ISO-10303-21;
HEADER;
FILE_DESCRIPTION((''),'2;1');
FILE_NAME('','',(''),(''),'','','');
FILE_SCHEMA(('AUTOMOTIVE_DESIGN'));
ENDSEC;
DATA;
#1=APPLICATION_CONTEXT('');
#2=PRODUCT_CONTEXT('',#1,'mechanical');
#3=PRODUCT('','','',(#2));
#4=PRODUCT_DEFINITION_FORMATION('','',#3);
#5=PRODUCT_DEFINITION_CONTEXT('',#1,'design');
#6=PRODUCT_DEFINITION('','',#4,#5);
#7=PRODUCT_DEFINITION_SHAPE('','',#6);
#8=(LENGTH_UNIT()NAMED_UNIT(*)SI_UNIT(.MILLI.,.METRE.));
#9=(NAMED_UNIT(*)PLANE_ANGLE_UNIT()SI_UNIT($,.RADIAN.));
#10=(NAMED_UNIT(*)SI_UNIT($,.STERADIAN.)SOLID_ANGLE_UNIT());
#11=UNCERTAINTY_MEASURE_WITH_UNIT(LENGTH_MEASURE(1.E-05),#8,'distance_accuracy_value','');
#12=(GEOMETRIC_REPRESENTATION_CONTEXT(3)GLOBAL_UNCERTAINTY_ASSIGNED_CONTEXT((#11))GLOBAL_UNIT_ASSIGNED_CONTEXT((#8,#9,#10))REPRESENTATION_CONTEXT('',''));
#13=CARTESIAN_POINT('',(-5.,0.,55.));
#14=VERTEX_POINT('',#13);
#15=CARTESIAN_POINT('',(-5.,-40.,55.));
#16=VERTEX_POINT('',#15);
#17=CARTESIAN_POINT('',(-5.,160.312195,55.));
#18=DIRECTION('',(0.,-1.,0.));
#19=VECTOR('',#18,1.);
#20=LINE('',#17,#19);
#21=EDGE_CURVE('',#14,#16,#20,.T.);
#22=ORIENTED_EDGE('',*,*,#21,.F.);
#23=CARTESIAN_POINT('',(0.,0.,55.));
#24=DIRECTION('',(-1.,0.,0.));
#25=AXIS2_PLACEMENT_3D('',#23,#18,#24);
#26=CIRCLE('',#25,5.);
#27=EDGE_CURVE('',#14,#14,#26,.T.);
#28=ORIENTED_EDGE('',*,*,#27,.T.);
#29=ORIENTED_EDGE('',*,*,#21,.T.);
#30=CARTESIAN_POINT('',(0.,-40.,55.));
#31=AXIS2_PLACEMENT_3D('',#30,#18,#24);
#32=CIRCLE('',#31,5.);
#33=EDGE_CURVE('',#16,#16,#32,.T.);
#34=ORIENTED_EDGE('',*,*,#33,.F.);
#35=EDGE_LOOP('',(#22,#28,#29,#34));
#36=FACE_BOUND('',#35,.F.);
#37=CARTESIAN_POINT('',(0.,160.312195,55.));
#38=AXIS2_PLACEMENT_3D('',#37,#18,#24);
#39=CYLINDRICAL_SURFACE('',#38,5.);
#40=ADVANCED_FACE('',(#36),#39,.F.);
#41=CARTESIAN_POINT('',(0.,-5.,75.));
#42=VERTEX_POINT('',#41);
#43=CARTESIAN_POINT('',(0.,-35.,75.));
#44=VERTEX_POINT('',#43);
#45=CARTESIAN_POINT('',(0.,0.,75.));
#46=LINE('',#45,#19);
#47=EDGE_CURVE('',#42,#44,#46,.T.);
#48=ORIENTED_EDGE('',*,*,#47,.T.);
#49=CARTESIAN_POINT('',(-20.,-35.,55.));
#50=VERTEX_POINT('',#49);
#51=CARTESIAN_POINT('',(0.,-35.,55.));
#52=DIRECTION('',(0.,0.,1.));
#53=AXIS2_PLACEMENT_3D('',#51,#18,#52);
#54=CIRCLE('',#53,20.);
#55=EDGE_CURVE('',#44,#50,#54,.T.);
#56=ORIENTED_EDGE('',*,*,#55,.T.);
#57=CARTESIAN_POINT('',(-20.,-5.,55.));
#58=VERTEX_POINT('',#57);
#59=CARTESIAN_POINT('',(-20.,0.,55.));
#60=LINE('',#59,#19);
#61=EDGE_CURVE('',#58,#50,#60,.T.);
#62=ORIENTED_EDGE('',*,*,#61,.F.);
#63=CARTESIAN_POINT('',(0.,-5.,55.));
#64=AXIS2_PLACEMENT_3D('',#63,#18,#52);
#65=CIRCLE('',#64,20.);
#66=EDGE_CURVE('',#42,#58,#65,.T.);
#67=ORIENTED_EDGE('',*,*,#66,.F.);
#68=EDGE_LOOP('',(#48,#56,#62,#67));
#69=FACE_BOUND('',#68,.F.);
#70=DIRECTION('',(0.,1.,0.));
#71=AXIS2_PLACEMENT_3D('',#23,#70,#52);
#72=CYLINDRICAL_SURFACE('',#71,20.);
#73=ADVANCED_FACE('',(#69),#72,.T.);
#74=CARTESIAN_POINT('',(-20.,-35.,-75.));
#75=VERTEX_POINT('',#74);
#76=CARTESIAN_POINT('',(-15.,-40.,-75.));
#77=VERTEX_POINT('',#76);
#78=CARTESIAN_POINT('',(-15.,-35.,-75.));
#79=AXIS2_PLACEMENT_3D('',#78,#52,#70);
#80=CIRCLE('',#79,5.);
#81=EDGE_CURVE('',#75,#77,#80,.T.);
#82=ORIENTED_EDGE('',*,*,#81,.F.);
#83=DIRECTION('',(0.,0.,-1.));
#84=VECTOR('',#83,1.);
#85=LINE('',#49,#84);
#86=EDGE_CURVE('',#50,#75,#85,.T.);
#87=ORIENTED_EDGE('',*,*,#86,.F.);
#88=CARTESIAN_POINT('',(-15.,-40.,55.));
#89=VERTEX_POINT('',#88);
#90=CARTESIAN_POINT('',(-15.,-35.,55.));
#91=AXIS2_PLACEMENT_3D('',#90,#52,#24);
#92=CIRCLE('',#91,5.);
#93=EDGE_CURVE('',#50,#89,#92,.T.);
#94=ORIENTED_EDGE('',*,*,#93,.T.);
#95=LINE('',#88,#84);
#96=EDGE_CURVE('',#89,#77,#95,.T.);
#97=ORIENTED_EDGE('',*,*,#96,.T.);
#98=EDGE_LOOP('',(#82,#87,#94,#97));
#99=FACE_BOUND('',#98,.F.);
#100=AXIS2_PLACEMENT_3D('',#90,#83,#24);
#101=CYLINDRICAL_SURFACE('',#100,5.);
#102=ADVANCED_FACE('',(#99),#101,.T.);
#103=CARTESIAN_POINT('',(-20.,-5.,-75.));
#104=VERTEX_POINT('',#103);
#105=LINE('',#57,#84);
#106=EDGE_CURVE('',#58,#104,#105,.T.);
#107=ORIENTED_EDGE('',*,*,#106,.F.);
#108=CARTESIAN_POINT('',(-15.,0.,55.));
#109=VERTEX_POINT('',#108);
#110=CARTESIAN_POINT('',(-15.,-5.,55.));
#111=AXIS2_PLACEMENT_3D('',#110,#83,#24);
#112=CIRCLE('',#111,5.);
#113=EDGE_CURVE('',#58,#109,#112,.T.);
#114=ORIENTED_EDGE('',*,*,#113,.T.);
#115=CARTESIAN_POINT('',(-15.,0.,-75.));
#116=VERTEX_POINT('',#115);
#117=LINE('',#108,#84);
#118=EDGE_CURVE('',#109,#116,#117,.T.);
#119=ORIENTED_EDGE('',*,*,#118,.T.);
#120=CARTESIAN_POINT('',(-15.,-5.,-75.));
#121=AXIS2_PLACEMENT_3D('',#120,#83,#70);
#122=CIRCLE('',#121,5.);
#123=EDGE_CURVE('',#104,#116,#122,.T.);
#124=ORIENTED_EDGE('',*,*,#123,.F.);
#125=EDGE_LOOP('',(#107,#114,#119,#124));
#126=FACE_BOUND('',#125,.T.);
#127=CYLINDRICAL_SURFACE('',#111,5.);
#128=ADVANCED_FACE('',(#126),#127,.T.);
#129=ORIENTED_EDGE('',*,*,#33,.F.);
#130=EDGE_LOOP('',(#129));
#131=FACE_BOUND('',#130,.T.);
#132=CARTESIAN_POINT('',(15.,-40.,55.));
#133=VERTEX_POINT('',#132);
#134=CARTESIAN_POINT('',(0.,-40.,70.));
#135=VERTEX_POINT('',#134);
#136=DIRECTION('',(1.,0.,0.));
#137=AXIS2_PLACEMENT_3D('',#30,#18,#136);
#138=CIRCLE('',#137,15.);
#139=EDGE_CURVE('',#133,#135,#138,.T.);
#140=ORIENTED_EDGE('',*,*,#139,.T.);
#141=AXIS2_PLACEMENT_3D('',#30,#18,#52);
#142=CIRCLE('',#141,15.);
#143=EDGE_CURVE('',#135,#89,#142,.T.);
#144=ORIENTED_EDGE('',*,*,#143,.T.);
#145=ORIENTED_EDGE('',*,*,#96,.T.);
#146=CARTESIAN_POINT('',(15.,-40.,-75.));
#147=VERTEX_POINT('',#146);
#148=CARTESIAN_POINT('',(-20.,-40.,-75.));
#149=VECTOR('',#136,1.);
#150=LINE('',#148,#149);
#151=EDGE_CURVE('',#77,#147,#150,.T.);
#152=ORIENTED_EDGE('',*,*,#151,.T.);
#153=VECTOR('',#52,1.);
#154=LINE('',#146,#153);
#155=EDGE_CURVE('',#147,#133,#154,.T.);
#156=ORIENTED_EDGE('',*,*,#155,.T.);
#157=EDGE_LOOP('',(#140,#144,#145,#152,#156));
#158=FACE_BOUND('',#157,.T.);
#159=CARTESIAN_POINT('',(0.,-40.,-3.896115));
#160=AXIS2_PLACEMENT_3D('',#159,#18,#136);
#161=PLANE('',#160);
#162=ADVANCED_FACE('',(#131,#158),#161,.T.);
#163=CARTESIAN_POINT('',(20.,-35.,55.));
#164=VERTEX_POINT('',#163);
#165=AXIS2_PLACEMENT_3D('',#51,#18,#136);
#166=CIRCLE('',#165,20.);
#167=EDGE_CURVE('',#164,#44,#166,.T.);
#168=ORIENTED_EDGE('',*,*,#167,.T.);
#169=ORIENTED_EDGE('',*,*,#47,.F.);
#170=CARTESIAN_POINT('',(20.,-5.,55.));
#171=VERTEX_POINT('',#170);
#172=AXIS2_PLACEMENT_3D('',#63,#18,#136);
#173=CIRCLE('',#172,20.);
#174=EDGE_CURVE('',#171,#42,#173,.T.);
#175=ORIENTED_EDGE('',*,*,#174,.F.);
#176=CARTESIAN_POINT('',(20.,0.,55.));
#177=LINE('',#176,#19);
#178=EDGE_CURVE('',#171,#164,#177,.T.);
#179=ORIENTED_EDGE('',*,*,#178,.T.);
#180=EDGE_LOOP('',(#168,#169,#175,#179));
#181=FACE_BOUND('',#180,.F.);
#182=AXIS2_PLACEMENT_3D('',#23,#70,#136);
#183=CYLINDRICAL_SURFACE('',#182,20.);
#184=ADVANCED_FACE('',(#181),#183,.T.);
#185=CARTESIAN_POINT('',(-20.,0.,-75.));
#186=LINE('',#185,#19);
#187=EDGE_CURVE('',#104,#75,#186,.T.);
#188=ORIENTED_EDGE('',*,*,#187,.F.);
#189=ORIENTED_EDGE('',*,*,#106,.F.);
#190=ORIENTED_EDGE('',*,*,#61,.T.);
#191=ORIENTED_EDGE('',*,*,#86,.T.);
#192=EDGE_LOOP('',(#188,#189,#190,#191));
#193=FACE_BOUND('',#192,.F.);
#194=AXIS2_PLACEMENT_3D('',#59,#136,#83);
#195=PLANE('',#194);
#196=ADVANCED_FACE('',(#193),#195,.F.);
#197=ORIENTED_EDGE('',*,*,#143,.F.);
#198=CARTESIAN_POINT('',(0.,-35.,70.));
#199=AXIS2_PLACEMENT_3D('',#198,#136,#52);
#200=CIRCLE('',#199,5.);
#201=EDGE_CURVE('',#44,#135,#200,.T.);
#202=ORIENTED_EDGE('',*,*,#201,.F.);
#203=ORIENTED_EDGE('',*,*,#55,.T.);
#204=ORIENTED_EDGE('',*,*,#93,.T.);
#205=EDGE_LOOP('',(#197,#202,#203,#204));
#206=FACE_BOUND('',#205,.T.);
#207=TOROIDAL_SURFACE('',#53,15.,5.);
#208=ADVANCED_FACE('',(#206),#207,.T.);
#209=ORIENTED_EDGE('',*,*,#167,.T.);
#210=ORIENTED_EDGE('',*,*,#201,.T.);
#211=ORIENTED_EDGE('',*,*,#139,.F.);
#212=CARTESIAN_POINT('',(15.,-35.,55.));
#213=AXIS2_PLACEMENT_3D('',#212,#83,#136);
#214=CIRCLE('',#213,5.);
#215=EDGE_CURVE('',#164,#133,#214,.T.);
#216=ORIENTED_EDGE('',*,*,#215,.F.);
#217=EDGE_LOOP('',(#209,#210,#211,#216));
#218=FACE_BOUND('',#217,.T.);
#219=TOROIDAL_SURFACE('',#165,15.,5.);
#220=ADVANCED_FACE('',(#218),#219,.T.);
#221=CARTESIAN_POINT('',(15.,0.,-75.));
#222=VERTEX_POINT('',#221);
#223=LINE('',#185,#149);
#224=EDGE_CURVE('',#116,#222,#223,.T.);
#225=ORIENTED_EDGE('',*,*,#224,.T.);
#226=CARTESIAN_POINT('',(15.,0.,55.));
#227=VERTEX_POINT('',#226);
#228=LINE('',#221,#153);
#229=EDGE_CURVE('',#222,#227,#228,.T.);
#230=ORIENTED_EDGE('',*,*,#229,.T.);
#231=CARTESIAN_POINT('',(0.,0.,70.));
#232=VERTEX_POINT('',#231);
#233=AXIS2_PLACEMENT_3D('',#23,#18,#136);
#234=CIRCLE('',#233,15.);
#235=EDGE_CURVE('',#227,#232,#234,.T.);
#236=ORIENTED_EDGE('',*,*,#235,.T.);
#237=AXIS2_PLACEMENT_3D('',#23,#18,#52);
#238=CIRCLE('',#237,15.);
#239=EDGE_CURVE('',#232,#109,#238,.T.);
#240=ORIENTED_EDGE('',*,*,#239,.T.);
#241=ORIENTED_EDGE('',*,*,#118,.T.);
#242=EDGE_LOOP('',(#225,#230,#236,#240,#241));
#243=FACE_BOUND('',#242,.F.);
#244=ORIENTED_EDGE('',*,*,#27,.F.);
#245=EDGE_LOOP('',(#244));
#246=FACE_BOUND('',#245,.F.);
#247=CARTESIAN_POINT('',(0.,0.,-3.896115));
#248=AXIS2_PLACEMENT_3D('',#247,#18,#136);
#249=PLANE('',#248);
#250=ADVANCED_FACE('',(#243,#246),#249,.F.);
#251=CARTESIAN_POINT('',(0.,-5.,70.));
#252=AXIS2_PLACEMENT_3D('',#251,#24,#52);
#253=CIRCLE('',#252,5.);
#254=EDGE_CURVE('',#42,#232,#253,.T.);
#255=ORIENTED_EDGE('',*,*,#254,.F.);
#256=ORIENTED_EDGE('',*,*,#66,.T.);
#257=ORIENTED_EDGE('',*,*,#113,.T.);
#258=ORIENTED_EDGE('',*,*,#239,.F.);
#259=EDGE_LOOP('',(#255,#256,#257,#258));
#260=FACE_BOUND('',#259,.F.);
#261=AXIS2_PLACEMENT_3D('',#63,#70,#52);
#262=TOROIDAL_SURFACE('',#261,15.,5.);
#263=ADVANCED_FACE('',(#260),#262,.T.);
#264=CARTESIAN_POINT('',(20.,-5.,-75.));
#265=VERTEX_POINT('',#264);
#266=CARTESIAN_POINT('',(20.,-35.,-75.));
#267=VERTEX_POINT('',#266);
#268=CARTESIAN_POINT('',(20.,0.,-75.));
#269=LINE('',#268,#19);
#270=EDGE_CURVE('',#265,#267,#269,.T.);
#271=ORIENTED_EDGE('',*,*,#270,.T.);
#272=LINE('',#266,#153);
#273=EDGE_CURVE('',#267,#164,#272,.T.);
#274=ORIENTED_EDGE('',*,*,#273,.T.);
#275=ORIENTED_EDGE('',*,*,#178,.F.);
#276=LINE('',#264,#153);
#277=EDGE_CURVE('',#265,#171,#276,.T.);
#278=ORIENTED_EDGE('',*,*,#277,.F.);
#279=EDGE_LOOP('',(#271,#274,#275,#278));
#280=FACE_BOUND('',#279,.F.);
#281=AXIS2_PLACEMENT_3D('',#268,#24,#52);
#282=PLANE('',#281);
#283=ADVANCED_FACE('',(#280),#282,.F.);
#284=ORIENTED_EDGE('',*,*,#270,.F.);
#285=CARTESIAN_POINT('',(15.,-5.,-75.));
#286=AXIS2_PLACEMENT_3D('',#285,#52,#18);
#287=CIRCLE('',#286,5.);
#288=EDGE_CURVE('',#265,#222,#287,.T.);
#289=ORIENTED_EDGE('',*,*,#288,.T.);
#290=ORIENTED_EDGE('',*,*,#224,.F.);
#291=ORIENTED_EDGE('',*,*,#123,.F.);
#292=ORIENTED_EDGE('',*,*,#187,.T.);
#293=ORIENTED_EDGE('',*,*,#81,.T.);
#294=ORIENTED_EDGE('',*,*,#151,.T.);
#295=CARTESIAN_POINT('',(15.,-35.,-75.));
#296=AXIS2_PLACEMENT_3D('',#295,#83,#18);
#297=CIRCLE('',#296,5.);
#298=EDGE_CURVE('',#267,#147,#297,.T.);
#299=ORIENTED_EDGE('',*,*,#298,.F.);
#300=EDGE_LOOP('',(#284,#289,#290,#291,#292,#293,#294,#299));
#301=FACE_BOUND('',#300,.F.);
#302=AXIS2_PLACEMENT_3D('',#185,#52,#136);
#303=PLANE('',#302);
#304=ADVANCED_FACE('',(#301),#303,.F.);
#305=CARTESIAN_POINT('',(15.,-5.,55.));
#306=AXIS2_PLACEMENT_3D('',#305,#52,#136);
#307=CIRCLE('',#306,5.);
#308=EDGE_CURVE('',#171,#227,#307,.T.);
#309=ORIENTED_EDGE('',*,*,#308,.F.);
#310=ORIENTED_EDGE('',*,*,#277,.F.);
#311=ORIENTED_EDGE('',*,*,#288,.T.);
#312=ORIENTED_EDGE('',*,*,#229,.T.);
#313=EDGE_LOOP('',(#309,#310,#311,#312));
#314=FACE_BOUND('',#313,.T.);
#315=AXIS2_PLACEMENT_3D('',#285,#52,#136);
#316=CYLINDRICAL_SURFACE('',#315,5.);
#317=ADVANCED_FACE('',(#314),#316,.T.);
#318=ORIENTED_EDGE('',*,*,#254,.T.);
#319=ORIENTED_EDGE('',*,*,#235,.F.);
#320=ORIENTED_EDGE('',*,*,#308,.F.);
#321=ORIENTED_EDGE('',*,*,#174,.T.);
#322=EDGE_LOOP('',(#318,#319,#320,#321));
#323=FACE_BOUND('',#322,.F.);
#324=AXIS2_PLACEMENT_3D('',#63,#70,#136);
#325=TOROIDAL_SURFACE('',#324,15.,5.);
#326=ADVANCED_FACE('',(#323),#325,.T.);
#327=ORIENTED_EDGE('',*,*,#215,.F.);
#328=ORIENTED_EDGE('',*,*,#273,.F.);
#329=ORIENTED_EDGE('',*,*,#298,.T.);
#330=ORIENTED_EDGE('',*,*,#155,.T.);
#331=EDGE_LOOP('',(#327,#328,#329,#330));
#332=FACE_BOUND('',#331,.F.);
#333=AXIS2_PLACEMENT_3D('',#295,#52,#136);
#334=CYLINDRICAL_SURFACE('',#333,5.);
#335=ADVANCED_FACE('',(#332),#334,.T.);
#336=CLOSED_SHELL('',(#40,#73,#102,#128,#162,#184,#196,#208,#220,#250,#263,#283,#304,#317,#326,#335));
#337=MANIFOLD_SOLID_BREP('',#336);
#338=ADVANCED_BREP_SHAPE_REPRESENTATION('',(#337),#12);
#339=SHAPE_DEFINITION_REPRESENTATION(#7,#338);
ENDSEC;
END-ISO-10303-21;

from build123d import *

# Parameters (mm, degrees)
F1_DEPTH = 40
F2_D     = 10
F3_R     = 5


with BuildPart() as f1:
    # F0 (on Front) → F1 (new body)
    with BuildSketch(Plane.XZ):
        with BuildLine():
            Line((-20, 55), (-20, -75))
            Line((-20, -75), (20, -75))
            Line((20, -75), (20, 55))
            ThreePointArc((20, 55), (14.1421356237, 69.1421356237), (0, 75))
            ThreePointArc((0, 75), (-14.1421356237, 69.1421356237), (-20, 55))
        make_face()
    extrude(amount=F1_DEPTH)

    # F2 (through all)
    with Locations(Plane(origin=(0, 0, 0), x_dir=(1, 0, 0), z_dir=(0, 1, 0))):
        with Locations((0, -55)):
            Hole(F2_D / 2)

    # F3
    f3_edges = [f1.edges().sort_by_distance(p)[0] for p in [
        (0, -40, 75),
        (0, 0, 75),
        (-20, 0, -10),
        (-20, -40, -10),
        (20, 0, -10),
        (20, -40, -10),
    ]]
    fillet(f3_edges, radius=F3_R)


solid = f1.part
